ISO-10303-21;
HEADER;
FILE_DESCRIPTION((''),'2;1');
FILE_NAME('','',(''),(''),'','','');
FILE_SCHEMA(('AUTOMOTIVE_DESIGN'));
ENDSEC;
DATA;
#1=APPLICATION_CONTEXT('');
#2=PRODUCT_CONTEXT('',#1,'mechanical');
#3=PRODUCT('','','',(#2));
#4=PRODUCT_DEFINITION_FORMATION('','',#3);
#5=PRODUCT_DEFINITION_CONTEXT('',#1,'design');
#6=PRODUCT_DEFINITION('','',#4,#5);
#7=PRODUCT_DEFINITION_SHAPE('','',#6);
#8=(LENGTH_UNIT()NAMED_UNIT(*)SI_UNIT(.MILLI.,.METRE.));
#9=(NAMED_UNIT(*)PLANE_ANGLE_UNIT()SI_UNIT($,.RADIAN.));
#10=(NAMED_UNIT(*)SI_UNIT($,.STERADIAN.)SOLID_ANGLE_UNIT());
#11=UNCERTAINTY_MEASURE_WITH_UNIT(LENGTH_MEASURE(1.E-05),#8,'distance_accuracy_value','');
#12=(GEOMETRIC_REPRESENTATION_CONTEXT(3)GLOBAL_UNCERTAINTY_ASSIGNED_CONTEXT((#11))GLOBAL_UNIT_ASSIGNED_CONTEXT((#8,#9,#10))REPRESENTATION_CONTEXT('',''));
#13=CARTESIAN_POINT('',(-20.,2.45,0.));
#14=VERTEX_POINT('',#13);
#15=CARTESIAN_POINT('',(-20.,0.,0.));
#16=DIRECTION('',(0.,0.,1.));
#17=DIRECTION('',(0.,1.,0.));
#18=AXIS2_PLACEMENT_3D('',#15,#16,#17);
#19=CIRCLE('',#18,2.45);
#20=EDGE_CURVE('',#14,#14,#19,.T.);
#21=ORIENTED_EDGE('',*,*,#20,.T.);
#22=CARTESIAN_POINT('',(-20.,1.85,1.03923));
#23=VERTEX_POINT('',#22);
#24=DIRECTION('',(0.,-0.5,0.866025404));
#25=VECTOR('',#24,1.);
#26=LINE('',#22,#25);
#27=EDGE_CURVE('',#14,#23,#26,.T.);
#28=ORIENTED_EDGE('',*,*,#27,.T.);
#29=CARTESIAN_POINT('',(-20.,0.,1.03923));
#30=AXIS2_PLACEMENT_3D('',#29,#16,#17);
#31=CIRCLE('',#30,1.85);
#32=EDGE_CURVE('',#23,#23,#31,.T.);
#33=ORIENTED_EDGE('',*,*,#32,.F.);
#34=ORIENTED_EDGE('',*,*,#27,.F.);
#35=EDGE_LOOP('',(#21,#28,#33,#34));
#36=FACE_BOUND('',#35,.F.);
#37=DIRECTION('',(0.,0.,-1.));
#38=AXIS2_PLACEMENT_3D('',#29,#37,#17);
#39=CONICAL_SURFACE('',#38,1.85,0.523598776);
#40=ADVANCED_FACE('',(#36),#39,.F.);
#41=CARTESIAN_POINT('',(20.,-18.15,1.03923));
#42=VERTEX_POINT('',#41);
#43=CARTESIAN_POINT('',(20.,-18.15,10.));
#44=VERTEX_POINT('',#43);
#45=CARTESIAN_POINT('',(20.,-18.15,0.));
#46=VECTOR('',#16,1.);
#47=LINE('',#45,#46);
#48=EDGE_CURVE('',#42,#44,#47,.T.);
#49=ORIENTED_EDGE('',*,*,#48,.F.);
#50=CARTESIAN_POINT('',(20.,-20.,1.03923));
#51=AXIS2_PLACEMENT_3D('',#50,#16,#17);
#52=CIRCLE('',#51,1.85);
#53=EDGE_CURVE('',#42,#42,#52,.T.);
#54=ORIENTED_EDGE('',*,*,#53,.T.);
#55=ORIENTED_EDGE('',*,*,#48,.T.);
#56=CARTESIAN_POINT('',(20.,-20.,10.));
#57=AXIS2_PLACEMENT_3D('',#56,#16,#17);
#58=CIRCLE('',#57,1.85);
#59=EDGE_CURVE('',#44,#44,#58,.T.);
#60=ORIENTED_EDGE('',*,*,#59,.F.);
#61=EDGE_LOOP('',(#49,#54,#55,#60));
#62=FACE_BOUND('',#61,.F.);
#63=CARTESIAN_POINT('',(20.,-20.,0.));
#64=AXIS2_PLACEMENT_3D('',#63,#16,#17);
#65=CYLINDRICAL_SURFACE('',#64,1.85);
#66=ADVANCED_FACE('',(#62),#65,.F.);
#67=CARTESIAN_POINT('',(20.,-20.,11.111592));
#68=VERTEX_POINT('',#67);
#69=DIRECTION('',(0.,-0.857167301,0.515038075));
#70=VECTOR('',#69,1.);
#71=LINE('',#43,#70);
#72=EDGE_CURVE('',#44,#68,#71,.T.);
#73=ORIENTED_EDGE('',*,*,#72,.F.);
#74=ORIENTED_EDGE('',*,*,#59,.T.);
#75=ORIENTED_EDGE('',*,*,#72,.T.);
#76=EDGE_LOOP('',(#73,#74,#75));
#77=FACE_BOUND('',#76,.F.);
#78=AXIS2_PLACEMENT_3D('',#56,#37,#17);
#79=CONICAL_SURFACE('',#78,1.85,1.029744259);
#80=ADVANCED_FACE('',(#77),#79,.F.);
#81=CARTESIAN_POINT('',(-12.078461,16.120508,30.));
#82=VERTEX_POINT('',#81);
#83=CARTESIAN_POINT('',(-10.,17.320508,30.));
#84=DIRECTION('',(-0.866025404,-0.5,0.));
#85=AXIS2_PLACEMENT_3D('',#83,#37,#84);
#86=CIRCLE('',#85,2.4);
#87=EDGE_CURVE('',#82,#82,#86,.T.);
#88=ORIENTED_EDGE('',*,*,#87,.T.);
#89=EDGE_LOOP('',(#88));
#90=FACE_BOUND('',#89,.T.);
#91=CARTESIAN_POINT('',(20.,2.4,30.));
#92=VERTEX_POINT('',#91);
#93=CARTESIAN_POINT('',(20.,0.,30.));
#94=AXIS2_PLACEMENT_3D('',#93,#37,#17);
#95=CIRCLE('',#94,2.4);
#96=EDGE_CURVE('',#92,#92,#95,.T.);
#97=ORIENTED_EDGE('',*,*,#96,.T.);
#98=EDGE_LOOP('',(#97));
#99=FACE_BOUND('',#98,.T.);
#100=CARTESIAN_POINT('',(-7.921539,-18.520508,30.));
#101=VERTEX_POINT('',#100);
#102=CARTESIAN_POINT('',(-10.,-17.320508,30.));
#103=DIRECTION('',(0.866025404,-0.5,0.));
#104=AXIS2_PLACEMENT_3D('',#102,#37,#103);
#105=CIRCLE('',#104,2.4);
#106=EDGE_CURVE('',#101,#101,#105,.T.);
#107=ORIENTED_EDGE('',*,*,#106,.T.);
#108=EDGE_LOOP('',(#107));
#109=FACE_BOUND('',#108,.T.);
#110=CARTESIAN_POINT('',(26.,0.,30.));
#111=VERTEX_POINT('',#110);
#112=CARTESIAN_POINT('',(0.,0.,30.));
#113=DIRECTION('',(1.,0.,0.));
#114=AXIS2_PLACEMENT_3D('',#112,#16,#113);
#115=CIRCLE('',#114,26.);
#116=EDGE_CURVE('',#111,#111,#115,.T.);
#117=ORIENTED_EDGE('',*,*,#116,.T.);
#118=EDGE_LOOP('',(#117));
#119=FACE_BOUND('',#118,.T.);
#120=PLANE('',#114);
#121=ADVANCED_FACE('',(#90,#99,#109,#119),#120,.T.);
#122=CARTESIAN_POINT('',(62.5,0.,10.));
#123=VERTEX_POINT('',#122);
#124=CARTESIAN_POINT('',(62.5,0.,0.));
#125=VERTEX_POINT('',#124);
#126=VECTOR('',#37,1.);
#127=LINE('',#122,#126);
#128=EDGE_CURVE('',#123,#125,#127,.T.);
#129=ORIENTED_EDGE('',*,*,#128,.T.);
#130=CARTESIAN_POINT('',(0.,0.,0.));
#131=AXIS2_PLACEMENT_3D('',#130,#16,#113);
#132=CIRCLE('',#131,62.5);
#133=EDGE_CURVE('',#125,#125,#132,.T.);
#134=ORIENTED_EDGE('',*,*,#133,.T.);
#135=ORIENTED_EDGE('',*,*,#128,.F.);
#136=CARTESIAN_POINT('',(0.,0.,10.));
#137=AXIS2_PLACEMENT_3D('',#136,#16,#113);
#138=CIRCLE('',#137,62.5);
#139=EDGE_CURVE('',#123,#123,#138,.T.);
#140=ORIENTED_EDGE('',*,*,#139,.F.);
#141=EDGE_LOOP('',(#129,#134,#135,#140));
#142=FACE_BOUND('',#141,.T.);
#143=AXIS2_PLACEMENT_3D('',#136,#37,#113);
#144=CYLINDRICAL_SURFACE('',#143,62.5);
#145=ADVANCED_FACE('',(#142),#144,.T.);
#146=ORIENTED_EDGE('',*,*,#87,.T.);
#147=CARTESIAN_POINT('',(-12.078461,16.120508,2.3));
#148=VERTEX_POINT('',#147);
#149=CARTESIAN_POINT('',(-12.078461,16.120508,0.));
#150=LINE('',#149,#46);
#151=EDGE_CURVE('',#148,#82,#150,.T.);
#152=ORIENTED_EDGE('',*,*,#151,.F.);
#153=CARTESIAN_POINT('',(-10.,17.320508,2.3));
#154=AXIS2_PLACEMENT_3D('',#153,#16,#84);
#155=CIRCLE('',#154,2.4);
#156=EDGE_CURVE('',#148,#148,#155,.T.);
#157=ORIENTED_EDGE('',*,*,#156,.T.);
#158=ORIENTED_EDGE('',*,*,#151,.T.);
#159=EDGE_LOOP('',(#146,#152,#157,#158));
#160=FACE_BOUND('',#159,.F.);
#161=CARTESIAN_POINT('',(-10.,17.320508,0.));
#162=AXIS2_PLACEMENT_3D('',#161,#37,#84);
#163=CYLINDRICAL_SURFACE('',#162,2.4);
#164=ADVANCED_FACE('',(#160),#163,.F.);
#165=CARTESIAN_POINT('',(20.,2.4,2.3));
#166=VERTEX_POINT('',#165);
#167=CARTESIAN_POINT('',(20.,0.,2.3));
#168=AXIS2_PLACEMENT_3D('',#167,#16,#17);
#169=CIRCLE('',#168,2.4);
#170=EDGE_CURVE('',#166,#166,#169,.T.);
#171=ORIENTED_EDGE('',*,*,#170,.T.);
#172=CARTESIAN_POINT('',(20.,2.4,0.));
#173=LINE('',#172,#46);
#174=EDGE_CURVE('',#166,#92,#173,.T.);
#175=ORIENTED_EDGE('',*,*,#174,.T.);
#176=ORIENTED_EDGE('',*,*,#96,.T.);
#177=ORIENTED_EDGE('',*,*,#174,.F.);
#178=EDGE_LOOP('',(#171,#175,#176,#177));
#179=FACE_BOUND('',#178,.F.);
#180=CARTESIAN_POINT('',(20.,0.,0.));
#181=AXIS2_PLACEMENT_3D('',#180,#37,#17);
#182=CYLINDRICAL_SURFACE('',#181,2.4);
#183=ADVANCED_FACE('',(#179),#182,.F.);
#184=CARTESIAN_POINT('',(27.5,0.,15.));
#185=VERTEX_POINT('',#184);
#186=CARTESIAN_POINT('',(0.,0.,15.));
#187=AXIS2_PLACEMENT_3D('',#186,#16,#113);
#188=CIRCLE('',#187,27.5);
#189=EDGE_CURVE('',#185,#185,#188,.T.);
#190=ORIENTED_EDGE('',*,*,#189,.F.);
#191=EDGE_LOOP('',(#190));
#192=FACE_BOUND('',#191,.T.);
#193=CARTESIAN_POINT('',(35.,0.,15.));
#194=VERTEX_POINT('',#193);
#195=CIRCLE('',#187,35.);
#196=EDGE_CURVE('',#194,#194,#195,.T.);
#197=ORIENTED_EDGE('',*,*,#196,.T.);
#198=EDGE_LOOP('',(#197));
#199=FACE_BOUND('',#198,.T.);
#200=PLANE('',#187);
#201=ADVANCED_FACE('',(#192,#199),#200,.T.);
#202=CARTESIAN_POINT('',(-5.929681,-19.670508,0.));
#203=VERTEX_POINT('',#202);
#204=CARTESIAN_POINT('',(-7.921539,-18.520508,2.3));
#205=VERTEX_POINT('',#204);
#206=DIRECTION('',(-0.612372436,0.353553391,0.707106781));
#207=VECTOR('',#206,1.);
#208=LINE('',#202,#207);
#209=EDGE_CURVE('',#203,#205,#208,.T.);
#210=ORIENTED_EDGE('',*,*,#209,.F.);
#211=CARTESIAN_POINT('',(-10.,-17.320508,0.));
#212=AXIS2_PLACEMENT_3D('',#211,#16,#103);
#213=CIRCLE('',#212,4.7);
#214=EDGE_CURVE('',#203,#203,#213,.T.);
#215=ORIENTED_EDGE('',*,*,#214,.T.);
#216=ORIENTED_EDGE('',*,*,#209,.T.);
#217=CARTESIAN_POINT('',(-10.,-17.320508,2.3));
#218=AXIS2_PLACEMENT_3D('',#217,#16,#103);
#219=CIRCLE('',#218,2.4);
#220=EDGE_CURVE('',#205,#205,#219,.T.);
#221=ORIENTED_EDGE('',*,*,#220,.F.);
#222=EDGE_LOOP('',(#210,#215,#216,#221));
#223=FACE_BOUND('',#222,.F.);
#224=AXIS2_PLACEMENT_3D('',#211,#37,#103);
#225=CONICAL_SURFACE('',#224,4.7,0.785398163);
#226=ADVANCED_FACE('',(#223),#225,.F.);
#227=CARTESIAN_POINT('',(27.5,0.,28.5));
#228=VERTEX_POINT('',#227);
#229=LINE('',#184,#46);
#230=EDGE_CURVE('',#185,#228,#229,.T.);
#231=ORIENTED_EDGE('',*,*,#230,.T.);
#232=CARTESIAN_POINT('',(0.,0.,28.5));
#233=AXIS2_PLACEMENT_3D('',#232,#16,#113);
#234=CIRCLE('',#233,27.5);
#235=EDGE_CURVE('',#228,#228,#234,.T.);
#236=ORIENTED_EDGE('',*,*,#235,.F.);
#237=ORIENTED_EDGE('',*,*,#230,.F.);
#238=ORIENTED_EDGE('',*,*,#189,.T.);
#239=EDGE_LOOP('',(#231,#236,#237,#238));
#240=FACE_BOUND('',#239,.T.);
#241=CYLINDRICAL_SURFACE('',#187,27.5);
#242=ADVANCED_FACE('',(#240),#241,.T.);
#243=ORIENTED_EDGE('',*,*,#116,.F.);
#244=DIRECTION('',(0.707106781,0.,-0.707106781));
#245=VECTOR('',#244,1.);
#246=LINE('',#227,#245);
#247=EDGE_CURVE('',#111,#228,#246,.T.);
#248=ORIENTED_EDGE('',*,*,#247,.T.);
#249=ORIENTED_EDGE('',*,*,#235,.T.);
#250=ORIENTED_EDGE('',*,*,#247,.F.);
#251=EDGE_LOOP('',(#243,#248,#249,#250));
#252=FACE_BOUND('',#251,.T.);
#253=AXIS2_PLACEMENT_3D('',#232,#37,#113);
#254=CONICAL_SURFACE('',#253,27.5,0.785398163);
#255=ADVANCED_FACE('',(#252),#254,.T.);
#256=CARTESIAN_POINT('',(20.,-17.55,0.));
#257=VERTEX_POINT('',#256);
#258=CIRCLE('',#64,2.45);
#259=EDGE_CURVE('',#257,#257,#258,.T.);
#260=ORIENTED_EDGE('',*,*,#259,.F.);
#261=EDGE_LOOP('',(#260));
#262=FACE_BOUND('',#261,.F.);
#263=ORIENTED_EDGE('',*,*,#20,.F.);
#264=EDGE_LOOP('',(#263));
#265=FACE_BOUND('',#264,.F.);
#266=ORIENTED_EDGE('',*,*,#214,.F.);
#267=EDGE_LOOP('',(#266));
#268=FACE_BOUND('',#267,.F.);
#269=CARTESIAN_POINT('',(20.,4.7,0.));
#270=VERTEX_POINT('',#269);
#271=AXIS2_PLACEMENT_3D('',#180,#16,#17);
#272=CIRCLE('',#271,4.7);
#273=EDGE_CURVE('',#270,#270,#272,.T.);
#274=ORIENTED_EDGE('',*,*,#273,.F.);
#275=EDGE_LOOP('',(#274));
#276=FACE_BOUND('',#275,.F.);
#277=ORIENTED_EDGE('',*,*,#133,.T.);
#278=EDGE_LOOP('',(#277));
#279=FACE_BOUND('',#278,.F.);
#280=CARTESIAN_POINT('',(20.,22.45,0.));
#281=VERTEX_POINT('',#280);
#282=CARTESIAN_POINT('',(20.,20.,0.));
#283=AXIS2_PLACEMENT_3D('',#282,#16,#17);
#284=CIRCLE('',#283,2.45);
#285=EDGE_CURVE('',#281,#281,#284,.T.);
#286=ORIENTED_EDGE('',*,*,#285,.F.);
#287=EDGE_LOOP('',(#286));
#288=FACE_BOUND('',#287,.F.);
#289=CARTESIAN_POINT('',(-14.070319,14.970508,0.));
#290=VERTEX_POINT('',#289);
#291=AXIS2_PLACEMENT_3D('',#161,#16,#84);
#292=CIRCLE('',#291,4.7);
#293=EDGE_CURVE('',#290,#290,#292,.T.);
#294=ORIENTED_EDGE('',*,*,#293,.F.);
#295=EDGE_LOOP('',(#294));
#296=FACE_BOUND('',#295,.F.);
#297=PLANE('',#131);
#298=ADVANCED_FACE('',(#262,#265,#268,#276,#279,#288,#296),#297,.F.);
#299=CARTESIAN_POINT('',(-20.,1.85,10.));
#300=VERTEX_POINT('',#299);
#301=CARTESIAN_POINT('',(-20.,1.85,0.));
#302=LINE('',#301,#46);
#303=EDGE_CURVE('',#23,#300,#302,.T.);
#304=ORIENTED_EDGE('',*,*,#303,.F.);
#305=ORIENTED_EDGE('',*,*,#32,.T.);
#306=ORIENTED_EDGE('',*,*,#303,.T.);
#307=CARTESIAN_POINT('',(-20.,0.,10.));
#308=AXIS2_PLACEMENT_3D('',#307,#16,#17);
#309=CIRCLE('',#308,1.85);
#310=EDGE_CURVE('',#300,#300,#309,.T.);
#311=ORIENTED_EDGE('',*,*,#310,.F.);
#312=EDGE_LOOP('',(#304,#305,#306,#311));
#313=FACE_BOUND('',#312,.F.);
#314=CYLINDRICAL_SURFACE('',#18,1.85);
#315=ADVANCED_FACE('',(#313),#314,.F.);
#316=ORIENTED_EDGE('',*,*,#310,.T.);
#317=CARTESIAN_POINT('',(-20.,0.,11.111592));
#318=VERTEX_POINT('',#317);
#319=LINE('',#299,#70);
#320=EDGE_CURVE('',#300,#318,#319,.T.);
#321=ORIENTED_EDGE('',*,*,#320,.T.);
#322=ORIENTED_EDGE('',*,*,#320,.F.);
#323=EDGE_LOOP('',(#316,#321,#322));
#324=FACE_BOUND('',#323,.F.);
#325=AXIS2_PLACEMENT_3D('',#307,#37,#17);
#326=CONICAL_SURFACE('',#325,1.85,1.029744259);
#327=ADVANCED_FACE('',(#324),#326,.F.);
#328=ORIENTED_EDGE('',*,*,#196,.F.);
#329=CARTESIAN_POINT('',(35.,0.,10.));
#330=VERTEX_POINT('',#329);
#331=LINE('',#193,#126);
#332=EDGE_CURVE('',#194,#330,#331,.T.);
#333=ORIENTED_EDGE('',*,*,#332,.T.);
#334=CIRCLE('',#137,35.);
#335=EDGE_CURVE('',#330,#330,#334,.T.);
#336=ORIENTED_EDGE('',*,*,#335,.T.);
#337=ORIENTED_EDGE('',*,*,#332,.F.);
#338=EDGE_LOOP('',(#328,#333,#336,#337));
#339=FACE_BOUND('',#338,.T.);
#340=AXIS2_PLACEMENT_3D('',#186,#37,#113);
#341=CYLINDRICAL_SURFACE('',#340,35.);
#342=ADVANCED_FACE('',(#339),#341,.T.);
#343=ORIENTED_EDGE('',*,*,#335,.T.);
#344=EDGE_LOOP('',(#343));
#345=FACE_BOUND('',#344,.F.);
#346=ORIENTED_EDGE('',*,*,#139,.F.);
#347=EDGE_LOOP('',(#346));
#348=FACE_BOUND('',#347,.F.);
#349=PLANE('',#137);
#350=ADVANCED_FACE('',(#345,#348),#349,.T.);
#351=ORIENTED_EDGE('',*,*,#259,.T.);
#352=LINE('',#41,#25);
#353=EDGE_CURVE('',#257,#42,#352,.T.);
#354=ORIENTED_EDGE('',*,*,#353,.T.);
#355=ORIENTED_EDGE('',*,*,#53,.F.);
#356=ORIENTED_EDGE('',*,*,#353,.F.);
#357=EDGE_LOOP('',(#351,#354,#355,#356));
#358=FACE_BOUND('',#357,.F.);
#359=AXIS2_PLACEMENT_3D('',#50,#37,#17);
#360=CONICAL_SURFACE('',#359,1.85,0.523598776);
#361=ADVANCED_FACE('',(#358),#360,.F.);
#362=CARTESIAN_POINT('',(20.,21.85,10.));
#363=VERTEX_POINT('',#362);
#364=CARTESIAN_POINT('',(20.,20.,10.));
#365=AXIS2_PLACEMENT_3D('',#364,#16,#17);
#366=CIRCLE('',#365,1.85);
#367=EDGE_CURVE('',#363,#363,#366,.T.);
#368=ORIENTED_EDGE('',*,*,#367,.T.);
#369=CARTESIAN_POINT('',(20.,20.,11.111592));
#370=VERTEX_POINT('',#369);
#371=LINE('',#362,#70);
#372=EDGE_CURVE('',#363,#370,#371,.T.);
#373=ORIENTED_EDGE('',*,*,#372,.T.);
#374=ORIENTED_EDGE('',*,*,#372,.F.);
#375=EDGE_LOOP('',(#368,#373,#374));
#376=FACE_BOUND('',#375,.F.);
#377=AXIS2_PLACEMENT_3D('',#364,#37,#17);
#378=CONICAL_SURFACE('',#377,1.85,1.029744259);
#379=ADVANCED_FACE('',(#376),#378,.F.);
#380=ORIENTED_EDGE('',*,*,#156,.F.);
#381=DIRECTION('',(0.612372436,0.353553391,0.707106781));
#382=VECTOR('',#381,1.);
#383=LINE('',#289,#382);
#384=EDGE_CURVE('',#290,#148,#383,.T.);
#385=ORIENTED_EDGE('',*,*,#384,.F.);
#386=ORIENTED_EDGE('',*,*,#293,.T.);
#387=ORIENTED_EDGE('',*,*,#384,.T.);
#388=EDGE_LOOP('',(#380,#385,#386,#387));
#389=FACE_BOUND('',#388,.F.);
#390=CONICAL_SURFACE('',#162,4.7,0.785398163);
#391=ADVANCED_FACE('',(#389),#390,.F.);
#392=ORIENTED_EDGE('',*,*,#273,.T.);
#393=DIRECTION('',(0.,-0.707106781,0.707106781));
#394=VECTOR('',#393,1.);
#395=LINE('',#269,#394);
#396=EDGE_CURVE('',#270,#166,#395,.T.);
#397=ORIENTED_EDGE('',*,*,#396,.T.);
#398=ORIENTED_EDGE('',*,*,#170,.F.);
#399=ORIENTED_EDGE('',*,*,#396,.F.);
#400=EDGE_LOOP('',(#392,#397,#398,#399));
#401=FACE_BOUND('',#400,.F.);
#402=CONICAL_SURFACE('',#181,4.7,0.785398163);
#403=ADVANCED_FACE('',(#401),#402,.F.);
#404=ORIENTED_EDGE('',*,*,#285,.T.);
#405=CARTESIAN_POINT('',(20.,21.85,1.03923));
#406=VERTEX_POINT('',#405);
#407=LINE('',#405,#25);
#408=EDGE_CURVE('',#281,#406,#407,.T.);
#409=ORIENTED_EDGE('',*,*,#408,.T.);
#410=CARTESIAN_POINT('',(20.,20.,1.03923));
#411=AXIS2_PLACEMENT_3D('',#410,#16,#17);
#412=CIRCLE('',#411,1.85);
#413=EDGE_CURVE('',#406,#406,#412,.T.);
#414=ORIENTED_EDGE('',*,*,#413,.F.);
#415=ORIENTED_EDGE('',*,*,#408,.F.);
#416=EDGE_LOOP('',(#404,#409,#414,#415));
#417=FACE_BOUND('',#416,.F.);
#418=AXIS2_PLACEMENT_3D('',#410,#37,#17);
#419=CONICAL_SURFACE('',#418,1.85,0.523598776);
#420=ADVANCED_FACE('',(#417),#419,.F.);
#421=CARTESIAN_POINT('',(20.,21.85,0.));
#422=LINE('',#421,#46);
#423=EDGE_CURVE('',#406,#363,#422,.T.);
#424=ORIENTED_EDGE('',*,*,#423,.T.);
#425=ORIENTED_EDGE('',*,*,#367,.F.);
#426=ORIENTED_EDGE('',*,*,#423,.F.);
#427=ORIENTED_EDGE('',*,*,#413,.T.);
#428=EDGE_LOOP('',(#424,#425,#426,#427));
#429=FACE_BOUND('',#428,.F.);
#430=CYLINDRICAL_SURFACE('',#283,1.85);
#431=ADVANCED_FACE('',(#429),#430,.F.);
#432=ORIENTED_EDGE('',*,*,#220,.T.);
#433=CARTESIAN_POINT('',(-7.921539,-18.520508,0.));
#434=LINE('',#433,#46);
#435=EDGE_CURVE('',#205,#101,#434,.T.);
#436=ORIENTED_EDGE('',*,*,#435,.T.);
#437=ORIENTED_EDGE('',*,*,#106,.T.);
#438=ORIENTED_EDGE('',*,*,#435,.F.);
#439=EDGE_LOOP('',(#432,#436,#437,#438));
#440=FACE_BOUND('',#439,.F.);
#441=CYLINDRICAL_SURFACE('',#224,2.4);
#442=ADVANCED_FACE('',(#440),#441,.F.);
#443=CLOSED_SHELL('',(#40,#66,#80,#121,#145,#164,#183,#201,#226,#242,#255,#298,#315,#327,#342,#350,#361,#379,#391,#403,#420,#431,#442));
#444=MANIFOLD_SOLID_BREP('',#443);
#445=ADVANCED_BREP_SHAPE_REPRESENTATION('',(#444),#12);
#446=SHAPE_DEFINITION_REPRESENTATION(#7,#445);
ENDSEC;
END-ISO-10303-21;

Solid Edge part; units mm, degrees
sketch "Sketch1" plane through (0, 0, 0) normal (0, -1, 0) x (1, 0, 0)
  line L0 (35, 15) -> (35, 10)
  line L1 (35, 10) -> (62.5, 10)
  line L2 (62.5, 10) -> (62.5, 0)
  line L3 (62.5, 0) -> (0, 0)
  line L4 (27.5, 30) -> (0, 30)
  line L5 (27.5, 15) -> (27.5, 30)
  line L6 (35, 15) -> (27.5, 15)
  dimension "D1" = 30
  dimension "D2" = 10
  dimension "D3" = 15
revolve "RevolvedProtrusion1" add sketch "Sketch1" angle 360 about axis through (0, 0, 0) along (0, 0, 1)
hole "base_hole" at (20, 0, 0) direction (0, 0, 1) diameter 4.8 end up to next countersink diameter 9.4 countersink angle 90
pattern_circular "Pattern1" count 3 over 360 about axis through (0, 0, 0) along (0, 0, 1) of "base_hole"
hole "Hole1" at (20, 20, 0) direction (0, 0, 1) diameter 3.7 depth 10 tip angle 118 start chamfer 0.6 start chamfer angle 30
hole "Hole2" at (20, -20, 0) direction (0, 0, 1) diameter 3.7 depth 10 tip angle 118 start chamfer 0.6 start chamfer angle 30
hole "Hole3" at (-20, 0, 0) direction (0, 0, 1) diameter 3.7 depth 10 tip angle 118 start chamfer 0.6 start chamfer angle 30
chamfer "Chamfer_1" distance 1.5 angle 45 1 edges at (-27.5, 0, 30)
properties material "Polyethylene, low density"
